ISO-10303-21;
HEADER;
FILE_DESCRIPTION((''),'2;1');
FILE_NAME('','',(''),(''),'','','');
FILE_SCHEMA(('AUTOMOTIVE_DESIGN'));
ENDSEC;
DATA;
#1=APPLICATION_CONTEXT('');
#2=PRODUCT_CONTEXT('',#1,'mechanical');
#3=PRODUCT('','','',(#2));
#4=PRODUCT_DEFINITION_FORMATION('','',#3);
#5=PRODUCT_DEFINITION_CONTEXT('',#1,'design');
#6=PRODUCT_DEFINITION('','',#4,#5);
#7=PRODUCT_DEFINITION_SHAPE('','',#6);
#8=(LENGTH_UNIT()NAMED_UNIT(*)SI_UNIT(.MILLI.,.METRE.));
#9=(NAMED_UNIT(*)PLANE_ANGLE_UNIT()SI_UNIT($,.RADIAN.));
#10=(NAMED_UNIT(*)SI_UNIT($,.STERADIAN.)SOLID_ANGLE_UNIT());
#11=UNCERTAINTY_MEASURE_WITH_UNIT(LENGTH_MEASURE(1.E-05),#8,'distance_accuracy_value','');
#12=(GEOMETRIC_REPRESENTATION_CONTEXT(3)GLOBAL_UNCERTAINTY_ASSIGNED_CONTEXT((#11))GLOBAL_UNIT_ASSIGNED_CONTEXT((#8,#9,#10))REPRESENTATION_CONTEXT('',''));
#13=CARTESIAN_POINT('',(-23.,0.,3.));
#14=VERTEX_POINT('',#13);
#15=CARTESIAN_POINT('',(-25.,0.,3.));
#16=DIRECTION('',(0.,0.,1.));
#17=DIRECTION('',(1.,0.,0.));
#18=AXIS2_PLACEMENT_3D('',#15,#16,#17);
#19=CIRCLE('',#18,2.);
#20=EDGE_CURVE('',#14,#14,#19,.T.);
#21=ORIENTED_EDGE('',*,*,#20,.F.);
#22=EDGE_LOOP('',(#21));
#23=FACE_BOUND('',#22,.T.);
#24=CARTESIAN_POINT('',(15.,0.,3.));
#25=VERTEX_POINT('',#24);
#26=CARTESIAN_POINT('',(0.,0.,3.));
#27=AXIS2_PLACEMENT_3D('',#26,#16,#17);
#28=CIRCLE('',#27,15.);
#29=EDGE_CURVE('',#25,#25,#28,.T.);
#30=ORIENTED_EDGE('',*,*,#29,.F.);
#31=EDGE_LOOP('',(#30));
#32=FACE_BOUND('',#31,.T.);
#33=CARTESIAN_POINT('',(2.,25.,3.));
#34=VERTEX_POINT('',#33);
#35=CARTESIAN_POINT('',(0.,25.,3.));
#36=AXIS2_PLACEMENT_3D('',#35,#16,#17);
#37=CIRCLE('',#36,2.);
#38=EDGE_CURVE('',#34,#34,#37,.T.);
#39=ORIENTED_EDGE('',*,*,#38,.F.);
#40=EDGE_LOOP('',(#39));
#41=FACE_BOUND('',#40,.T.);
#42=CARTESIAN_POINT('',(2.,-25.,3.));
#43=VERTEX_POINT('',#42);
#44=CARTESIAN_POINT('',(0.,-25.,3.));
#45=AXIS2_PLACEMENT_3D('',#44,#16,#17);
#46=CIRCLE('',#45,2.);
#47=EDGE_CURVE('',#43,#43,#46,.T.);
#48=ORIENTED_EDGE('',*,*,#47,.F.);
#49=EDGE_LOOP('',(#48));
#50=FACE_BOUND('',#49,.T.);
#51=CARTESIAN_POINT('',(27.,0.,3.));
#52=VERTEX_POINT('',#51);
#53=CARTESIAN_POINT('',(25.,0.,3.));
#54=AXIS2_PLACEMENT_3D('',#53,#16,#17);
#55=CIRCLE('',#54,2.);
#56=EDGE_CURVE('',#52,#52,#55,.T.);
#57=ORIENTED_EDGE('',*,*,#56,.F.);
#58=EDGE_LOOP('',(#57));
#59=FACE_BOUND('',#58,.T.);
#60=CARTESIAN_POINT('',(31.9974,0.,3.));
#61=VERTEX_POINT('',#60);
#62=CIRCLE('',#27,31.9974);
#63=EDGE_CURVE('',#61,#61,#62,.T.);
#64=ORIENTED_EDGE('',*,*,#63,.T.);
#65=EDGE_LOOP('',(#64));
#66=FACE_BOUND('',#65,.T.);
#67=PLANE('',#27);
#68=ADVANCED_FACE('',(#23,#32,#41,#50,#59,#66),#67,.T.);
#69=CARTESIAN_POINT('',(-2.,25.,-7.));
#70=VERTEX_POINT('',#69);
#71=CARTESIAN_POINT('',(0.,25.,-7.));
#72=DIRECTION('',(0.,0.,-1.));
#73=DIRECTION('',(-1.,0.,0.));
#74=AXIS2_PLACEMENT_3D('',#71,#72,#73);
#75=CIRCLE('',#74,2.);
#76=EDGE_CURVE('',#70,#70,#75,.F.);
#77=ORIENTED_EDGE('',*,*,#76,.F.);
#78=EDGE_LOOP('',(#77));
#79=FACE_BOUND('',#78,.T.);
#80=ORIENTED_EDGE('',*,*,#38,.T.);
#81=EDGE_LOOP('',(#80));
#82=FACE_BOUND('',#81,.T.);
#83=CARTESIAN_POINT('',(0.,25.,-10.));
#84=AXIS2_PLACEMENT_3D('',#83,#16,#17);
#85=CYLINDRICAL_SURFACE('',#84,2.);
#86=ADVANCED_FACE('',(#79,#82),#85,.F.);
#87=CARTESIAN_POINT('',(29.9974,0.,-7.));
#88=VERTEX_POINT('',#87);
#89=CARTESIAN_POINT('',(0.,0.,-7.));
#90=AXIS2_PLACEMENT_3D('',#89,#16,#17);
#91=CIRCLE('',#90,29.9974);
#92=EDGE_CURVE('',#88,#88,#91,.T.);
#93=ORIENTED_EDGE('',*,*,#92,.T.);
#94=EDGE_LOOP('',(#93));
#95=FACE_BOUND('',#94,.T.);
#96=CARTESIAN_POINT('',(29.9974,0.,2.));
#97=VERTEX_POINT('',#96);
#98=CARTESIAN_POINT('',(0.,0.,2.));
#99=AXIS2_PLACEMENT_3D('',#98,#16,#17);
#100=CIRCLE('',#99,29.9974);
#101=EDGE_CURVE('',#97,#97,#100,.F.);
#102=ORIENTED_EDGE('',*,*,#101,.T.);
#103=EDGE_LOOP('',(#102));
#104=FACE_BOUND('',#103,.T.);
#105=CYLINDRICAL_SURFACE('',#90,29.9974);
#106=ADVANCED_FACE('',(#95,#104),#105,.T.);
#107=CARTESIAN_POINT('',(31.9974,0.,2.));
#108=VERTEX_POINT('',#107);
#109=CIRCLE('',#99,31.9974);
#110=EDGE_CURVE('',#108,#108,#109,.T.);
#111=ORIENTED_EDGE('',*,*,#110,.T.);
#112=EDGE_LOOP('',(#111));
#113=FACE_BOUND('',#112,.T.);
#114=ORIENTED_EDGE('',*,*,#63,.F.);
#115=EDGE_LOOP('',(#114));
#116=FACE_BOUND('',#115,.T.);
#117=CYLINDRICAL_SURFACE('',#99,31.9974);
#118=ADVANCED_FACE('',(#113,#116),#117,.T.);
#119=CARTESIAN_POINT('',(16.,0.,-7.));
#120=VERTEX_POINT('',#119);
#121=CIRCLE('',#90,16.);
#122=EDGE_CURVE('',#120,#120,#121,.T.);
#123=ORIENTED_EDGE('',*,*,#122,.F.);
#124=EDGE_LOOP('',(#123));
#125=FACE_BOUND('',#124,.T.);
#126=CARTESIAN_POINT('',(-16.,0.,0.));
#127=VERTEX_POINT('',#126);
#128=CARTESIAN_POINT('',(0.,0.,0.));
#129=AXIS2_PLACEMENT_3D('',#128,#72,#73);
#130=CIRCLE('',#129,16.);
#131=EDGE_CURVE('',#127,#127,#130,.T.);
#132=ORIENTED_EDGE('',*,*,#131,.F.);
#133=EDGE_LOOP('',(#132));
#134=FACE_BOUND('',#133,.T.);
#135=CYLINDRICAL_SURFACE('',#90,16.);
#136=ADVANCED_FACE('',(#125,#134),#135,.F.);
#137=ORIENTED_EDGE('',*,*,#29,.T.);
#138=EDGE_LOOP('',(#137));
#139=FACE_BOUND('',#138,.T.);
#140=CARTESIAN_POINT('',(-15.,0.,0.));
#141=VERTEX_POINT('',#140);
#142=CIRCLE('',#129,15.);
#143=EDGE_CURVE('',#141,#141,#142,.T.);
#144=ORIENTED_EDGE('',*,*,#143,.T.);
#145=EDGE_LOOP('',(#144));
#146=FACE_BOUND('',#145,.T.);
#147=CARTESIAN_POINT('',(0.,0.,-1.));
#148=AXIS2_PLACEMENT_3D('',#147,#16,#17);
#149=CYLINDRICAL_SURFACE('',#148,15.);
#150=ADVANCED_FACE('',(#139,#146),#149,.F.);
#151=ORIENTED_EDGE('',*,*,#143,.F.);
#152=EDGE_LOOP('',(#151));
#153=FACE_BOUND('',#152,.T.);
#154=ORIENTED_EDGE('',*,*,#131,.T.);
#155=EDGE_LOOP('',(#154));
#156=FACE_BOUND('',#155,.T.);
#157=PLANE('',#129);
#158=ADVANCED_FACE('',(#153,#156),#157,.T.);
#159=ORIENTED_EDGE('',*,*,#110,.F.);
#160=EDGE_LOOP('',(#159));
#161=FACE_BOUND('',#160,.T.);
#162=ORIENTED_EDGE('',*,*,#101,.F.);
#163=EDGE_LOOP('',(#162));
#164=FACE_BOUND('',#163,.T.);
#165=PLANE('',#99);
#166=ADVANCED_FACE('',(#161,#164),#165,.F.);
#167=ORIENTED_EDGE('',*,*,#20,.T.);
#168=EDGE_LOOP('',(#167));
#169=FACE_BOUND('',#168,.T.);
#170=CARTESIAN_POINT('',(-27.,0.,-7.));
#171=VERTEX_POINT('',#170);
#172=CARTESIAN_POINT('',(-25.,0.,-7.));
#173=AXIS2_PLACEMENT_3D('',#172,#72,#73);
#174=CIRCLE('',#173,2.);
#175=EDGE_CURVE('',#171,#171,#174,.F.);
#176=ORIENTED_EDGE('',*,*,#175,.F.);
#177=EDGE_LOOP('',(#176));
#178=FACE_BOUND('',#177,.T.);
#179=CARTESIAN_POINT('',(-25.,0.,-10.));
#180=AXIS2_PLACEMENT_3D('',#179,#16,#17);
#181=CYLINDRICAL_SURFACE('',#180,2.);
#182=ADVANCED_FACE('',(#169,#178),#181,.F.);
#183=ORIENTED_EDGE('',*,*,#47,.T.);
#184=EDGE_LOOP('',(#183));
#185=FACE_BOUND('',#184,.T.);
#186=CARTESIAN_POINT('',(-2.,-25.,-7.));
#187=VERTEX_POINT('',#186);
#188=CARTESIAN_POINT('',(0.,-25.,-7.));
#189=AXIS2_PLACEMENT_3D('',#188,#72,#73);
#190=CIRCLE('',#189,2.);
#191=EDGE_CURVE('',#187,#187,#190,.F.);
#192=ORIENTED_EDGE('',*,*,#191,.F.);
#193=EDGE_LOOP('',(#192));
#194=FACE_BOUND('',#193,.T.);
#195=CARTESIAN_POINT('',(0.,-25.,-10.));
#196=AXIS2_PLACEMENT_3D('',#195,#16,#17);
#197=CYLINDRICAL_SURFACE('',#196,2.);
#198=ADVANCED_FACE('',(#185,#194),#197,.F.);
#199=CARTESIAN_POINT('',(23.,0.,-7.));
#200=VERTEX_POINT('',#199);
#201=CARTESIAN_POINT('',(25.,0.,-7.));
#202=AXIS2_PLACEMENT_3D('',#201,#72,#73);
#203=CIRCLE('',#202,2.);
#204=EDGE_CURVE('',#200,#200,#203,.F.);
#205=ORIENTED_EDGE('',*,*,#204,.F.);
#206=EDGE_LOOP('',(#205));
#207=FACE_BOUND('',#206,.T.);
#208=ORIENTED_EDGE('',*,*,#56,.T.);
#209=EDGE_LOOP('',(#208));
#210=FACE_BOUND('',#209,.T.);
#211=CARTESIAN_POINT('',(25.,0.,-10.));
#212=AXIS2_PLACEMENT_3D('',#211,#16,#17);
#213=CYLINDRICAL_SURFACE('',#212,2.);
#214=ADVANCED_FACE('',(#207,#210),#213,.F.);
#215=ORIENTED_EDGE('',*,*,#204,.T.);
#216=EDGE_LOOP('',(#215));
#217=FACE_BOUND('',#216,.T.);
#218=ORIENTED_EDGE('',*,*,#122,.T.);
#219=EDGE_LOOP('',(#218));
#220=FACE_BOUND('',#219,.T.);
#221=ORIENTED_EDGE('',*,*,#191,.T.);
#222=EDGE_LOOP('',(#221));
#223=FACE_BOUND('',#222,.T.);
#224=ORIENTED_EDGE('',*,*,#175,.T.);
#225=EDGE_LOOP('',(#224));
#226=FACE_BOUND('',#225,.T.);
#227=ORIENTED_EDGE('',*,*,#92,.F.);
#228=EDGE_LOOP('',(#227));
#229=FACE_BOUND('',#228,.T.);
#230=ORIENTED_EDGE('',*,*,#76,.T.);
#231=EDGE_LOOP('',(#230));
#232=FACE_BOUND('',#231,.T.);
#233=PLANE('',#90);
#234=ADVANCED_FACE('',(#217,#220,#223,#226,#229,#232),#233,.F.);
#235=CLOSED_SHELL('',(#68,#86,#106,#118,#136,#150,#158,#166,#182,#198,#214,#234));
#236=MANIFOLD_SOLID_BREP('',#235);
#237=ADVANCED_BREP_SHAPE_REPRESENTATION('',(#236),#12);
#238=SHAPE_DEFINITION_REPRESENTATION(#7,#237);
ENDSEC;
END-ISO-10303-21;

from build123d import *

# Parameters (mm, degrees)
SKETCH1_R           = 29.9974
SKETCH1_R_2         = 16
BOSS_EXTRUDE1_DEPTH = 7
SKETCH2_R           = 2
CUT_EXTRUDE1_DEPTH  = 10
SKETCH3_R           = 16
SKETCH3_R_2         = 15
BOSS_EXTRUDE2_DEPTH = 1
BOSS_EXTRUDE3_START = 3
SKETCH1_3_R         = 29.9974
SKETCH1_3_R_2       = 16
BOSS_EXTRUDE3_DEPTH = 3
BOSS_EXTRUDE4_START = 2
SKETCH3_2_R         = 16
SKETCH3_2_R_2       = 15
BOSS_EXTRUDE4_DEPTH = 2
SKETCH4_R           = 31.9974
SKETCH4_R_2         = 29.9974
BOSS_EXTRUDE5_DEPTH = 1
CUT_EXTRUDE3_START  = -1
SKETCH5_R           = 16
SKETCH5_R_2         = 15
CUT_EXTRUDE3_DEPTH  = 1
SKETCH6_R           = 3
SKETCH6_R_2         = 2
BOSS_EXTRUDE6_DEPTH = 3
CHAMFER1_SIZE       = 3
CUT_EXTRUDE4_START  = -10
SKETCH7_R           = 2
CUT_EXTRUDE4_DEPTH  = 10
BOSS_EXTRUDE7_START = 1
SKETCH8_R           = 16
SKETCH8_R_2         = 15
BOSS_EXTRUDE7_DEPTH = 1


# Read off the part's stored shape, not the designer's step: Cut-Extrude5
with BuildPart() as part:
    # Sketch1 → Boss-Extrude1 (new body)
    with BuildSketch(Plane.XY):
        Circle(SKETCH1_R)
        Circle(SKETCH1_R_2, mode=Mode.SUBTRACT)
    extrude(amount=-BOSS_EXTRUDE1_DEPTH)

    # Sketch2 → Cut-Extrude1 (cut)
    with BuildSketch(Plane.XY):
        with Locations((25, 0)):
            Circle(SKETCH2_R)
        with Locations((0, -25)):
            Circle(SKETCH2_R)
        with Locations((-25, 0)):
            Circle(SKETCH2_R)
        with Locations((0, 25)):
            Circle(SKETCH2_R)
    extrude(amount=-CUT_EXTRUDE1_DEPTH, mode=Mode.SUBTRACT)

    # Sketch3 → Boss-Extrude2 (add)
    with BuildSketch(Plane.XY):
        Circle(SKETCH3_R)
        Circle(SKETCH3_R_2, mode=Mode.SUBTRACT)
    extrude(amount=-BOSS_EXTRUDE2_DEPTH)

    # Sketch1<3> → Boss-Extrude3 (add)
    with BuildSketch(Plane.XY.offset(BOSS_EXTRUDE3_START)):
        Circle(SKETCH1_3_R)
        Circle(SKETCH1_3_R_2, mode=Mode.SUBTRACT)
    extrude(amount=-BOSS_EXTRUDE3_DEPTH)

    # Sketch3<2> → Boss-Extrude4 (add)
    with BuildSketch(Plane.XY.offset(BOSS_EXTRUDE4_START)):
        Circle(SKETCH3_2_R)
        Circle(SKETCH3_2_R_2, mode=Mode.SUBTRACT)
    extrude(amount=-BOSS_EXTRUDE4_DEPTH)

    # Sketch4 → Boss-Extrude5 (add)
    with BuildSketch(Plane.XY.offset(3)):
        Circle(SKETCH4_R)
        Circle(SKETCH4_R_2, mode=Mode.SUBTRACT)
    extrude(amount=-BOSS_EXTRUDE5_DEPTH)

    # Sketch5 → Cut-Extrude3 (cut)
    with BuildSketch(Plane(origin=(0, 0, -1), x_dir=(-1, 0, 0), z_dir=(0, 0, -1)).offset(CUT_EXTRUDE3_START)):
        with Locations(Location((0, 0, 0), (0, 0, 180))):
            Circle(SKETCH5_R)
        with Locations(Location((0, 0, 0), (0, 0, 180))):
            Circle(SKETCH5_R_2, mode=Mode.SUBTRACT)
    extrude(amount=CUT_EXTRUDE3_DEPTH, mode=Mode.SUBTRACT)

    # Sketch6 → Boss-Extrude6 (add)
    # profile 1 of 4: a face of its own
    with BuildSketch(Plane(origin=(0, 0, -7), x_dir=(-1, 0, 0), z_dir=(0, 0, -1))):
        with Locations(Location((-25, 0, 0), (0, 0, 180))):
            Circle(SKETCH6_R)
        with Locations(Location((-25, 0, 0), (0, 0, 180))):
            Circle(SKETCH6_R_2, mode=Mode.SUBTRACT)
    # profile 2 of 4: a face of its own
    with BuildSketch(Plane(origin=(0, 0, -7), x_dir=(-1, 0, 0), z_dir=(0, 0, -1))):
        with Locations(Location((0, -25, 0), (0, 0, 180))):
            Circle(SKETCH6_R)
        with Locations(Location((0, -25, 0), (0, 0, 180))):
            Circle(SKETCH6_R_2, mode=Mode.SUBTRACT)
    # profile 3 of 4: a face of its own
    with BuildSketch(Plane(origin=(0, 0, -7), x_dir=(-1, 0, 0), z_dir=(0, 0, -1))):
        with Locations(Location((25, 0, 0), (0, 0, 180))):
            Circle(SKETCH6_R)
        with Locations(Location((25, 0, 0), (0, 0, 180))):
            Circle(SKETCH6_R_2, mode=Mode.SUBTRACT)
    # profile 4 of 4: a face of its own
    with BuildSketch(Plane(origin=(0, 0, -7), x_dir=(-1, 0, 0), z_dir=(0, 0, -1))):
        with Locations(Location((0, 25, 0), (0, 0, 180))):
            Circle(SKETCH6_R)
        with Locations(Location((0, 25, 0), (0, 0, 180))):
            Circle(SKETCH6_R_2, mode=Mode.SUBTRACT)
    extrude(amount=BOSS_EXTRUDE6_DEPTH)

    # Chamfer1
    # the kernel refuses this chamfer: 3 mm, written as the material it adds along each edge
    with BuildSketch(Plane(origin=(25, 0, -7), x_dir=(1, 0, 0), z_dir=(0, 1, 0))) as chamfer1_piece_1_section:
        Polygon((3 + CHAMFER1_SIZE, 0), (3, CHAMFER1_SIZE), (3, 0), align=None)
    chamfer1_piece_1 = revolve(axis=Axis((25, 0, -7), (0, 0, -1)), mode=Mode.PRIVATE)
    chamfer1_piece_1 = chamfer1_piece_1 & Plane(origin=(0, 0, -8.42256149), x_dir=(1, 0, 0), z_dir=(0, 0, 1)) * Cylinder(29.9974, 25, mode=Mode.PRIVATE)
    chamfer1_piece_1 = split(chamfer1_piece_1, bisect_by=Plane(origin=(20.492585696, 0, -10), z_dir=(0, 0, 1)), keep=Keep.TOP, mode=Mode.PRIVATE)
    add(chamfer1_piece_1)
    with BuildSketch(Plane(origin=(0, -25, -7), x_dir=(1, 0, 0), z_dir=(0, 1, 0))) as chamfer1_piece_2_section:
        Polygon((3 + CHAMFER1_SIZE, 0), (3, CHAMFER1_SIZE), (3, 0), align=None)
    chamfer1_piece_2 = revolve(axis=Axis((0, -25, -7), (0, 0, -1)), mode=Mode.PRIVATE)
    chamfer1_piece_2 = chamfer1_piece_2 & Plane(origin=(0, 0, -8.422561428), x_dir=(1, 0, 0), z_dir=(0, 0, 1)) * Cylinder(29.9974, 25, mode=Mode.PRIVATE)
    chamfer1_piece_2 = split(chamfer1_piece_2, bisect_by=Plane(origin=(-4.507414242, -25, -10), z_dir=(0, 0, 1)), keep=Keep.TOP, mode=Mode.PRIVATE)
    add(chamfer1_piece_2)
    with BuildSketch(Plane(origin=(-25, 0, -7), x_dir=(1, 0, 0), z_dir=(0, 1, 0))) as chamfer1_piece_3_section:
        Polygon((3 + CHAMFER1_SIZE, 0), (3, CHAMFER1_SIZE), (3, 0), align=None)
    chamfer1_piece_3 = revolve(axis=Axis((-25, 0, -7), (0, 0, -1)), mode=Mode.PRIVATE)
    chamfer1_piece_3 = chamfer1_piece_3 & Plane(origin=(0, 0, -8.422561427), x_dir=(1, 0, 0), z_dir=(0, 0, 1)) * Cylinder(29.9974, 25, mode=Mode.PRIVATE)
    chamfer1_piece_3 = split(chamfer1_piece_3, bisect_by=Plane(origin=(-29.507414241, 0, -10), z_dir=(0, 0, 1)), keep=Keep.TOP, mode=Mode.PRIVATE)
    add(chamfer1_piece_3)
    with BuildSketch(Plane(origin=(0, 25, -7), x_dir=(1, 0, 0), z_dir=(0, 1, 0))) as chamfer1_piece_4_section:
        Polygon((3 + CHAMFER1_SIZE, 0), (3, CHAMFER1_SIZE), (3, 0), align=None)
    chamfer1_piece_4 = revolve(axis=Axis((0, 25, -7), (0, 0, -1)), mode=Mode.PRIVATE)
    chamfer1_piece_4 = chamfer1_piece_4 & Plane(origin=(0, 0, -8.422561436), x_dir=(1, 0, 0), z_dir=(0, 0, 1)) * Cylinder(29.9974, 25, mode=Mode.PRIVATE)
    chamfer1_piece_4 = split(chamfer1_piece_4, bisect_by=Plane(origin=(-4.50741425, 25, -10), z_dir=(0, 0, 1)), keep=Keep.TOP, mode=Mode.PRIVATE)
    add(chamfer1_piece_4)

    # Sketch7 → Cut-Extrude4 (cut)
    with BuildSketch(Plane(origin=(0, 0, 0), x_dir=(-1, 0, 0), z_dir=(0, 0, -1)).offset(CUT_EXTRUDE4_START)):
        with Locations(Location((-25, 0, 0), (0, 0, 180))):
            Circle(SKETCH7_R)
        with Locations(Location((0, 25, 0), (0, 0, 180))):
            Circle(SKETCH7_R)
        with Locations(Location((25, 0, 0), (0, 0, 180))):
            Circle(SKETCH7_R)
        with Locations(Location((0, -25, 0), (0, 0, 180))):
            Circle(SKETCH7_R)
    extrude(amount=CUT_EXTRUDE4_DEPTH, mode=Mode.SUBTRACT)

    # Sketch8 → Boss-Extrude7 (add)
    with BuildSketch(Plane.XY.offset(2).offset(BOSS_EXTRUDE7_START)):
        Circle(SKETCH8_R)
        Circle(SKETCH8_R_2, mode=Mode.SUBTRACT)
    extrude(amount=-BOSS_EXTRUDE7_DEPTH)

    # Cut-Extrude5 outline → Cut-Extrude5 (revolve, cut)
    with BuildSketch(Plane(origin=(25, 0, 0), x_dir=(1, 0, 0), z_dir=(0, -1, 0))):
        Polygon((2, -7), (2, -10), (3, -10), (6, -7), align=None)
    revolve(axis=Axis((25, 0, 0), (0, 0, 1)), mode=Mode.SUBTRACT)

    # Cut-Extrude5 2 outline → Cut-Extrude5 2 (revolve, cut)
    with BuildSketch(Plane.XZ.offset(25)):
        Polygon((2, -7), (2, -10), (3, -10), (6, -7), align=None)
    revolve(axis=Axis((0, -25, 0), (0, 0, 1)), mode=Mode.SUBTRACT)

    # Cut-Extrude5 3 outline → Cut-Extrude5 3 (revolve, cut)
    with BuildSketch(Plane(origin=(-25, 0, 0), x_dir=(1, 0, 0), z_dir=(0, -1, 0))):
        Polygon((2, -7), (2, -10), (3, -10), (6, -7), align=None)
    revolve(axis=Axis((-25, 0, 0), (0, 0, 1)), mode=Mode.SUBTRACT)

    # Cut-Extrude5 4 outline → Cut-Extrude5 4 (revolve, cut)
    with BuildSketch(Plane.XZ.offset(-25)):
        Polygon((2, -7), (2, -10), (3, -10), (6, -7), align=None)
    revolve(axis=Axis((0, 25, 0), (0, 0, 1)), mode=Mode.SUBTRACT)


solid = part.part
